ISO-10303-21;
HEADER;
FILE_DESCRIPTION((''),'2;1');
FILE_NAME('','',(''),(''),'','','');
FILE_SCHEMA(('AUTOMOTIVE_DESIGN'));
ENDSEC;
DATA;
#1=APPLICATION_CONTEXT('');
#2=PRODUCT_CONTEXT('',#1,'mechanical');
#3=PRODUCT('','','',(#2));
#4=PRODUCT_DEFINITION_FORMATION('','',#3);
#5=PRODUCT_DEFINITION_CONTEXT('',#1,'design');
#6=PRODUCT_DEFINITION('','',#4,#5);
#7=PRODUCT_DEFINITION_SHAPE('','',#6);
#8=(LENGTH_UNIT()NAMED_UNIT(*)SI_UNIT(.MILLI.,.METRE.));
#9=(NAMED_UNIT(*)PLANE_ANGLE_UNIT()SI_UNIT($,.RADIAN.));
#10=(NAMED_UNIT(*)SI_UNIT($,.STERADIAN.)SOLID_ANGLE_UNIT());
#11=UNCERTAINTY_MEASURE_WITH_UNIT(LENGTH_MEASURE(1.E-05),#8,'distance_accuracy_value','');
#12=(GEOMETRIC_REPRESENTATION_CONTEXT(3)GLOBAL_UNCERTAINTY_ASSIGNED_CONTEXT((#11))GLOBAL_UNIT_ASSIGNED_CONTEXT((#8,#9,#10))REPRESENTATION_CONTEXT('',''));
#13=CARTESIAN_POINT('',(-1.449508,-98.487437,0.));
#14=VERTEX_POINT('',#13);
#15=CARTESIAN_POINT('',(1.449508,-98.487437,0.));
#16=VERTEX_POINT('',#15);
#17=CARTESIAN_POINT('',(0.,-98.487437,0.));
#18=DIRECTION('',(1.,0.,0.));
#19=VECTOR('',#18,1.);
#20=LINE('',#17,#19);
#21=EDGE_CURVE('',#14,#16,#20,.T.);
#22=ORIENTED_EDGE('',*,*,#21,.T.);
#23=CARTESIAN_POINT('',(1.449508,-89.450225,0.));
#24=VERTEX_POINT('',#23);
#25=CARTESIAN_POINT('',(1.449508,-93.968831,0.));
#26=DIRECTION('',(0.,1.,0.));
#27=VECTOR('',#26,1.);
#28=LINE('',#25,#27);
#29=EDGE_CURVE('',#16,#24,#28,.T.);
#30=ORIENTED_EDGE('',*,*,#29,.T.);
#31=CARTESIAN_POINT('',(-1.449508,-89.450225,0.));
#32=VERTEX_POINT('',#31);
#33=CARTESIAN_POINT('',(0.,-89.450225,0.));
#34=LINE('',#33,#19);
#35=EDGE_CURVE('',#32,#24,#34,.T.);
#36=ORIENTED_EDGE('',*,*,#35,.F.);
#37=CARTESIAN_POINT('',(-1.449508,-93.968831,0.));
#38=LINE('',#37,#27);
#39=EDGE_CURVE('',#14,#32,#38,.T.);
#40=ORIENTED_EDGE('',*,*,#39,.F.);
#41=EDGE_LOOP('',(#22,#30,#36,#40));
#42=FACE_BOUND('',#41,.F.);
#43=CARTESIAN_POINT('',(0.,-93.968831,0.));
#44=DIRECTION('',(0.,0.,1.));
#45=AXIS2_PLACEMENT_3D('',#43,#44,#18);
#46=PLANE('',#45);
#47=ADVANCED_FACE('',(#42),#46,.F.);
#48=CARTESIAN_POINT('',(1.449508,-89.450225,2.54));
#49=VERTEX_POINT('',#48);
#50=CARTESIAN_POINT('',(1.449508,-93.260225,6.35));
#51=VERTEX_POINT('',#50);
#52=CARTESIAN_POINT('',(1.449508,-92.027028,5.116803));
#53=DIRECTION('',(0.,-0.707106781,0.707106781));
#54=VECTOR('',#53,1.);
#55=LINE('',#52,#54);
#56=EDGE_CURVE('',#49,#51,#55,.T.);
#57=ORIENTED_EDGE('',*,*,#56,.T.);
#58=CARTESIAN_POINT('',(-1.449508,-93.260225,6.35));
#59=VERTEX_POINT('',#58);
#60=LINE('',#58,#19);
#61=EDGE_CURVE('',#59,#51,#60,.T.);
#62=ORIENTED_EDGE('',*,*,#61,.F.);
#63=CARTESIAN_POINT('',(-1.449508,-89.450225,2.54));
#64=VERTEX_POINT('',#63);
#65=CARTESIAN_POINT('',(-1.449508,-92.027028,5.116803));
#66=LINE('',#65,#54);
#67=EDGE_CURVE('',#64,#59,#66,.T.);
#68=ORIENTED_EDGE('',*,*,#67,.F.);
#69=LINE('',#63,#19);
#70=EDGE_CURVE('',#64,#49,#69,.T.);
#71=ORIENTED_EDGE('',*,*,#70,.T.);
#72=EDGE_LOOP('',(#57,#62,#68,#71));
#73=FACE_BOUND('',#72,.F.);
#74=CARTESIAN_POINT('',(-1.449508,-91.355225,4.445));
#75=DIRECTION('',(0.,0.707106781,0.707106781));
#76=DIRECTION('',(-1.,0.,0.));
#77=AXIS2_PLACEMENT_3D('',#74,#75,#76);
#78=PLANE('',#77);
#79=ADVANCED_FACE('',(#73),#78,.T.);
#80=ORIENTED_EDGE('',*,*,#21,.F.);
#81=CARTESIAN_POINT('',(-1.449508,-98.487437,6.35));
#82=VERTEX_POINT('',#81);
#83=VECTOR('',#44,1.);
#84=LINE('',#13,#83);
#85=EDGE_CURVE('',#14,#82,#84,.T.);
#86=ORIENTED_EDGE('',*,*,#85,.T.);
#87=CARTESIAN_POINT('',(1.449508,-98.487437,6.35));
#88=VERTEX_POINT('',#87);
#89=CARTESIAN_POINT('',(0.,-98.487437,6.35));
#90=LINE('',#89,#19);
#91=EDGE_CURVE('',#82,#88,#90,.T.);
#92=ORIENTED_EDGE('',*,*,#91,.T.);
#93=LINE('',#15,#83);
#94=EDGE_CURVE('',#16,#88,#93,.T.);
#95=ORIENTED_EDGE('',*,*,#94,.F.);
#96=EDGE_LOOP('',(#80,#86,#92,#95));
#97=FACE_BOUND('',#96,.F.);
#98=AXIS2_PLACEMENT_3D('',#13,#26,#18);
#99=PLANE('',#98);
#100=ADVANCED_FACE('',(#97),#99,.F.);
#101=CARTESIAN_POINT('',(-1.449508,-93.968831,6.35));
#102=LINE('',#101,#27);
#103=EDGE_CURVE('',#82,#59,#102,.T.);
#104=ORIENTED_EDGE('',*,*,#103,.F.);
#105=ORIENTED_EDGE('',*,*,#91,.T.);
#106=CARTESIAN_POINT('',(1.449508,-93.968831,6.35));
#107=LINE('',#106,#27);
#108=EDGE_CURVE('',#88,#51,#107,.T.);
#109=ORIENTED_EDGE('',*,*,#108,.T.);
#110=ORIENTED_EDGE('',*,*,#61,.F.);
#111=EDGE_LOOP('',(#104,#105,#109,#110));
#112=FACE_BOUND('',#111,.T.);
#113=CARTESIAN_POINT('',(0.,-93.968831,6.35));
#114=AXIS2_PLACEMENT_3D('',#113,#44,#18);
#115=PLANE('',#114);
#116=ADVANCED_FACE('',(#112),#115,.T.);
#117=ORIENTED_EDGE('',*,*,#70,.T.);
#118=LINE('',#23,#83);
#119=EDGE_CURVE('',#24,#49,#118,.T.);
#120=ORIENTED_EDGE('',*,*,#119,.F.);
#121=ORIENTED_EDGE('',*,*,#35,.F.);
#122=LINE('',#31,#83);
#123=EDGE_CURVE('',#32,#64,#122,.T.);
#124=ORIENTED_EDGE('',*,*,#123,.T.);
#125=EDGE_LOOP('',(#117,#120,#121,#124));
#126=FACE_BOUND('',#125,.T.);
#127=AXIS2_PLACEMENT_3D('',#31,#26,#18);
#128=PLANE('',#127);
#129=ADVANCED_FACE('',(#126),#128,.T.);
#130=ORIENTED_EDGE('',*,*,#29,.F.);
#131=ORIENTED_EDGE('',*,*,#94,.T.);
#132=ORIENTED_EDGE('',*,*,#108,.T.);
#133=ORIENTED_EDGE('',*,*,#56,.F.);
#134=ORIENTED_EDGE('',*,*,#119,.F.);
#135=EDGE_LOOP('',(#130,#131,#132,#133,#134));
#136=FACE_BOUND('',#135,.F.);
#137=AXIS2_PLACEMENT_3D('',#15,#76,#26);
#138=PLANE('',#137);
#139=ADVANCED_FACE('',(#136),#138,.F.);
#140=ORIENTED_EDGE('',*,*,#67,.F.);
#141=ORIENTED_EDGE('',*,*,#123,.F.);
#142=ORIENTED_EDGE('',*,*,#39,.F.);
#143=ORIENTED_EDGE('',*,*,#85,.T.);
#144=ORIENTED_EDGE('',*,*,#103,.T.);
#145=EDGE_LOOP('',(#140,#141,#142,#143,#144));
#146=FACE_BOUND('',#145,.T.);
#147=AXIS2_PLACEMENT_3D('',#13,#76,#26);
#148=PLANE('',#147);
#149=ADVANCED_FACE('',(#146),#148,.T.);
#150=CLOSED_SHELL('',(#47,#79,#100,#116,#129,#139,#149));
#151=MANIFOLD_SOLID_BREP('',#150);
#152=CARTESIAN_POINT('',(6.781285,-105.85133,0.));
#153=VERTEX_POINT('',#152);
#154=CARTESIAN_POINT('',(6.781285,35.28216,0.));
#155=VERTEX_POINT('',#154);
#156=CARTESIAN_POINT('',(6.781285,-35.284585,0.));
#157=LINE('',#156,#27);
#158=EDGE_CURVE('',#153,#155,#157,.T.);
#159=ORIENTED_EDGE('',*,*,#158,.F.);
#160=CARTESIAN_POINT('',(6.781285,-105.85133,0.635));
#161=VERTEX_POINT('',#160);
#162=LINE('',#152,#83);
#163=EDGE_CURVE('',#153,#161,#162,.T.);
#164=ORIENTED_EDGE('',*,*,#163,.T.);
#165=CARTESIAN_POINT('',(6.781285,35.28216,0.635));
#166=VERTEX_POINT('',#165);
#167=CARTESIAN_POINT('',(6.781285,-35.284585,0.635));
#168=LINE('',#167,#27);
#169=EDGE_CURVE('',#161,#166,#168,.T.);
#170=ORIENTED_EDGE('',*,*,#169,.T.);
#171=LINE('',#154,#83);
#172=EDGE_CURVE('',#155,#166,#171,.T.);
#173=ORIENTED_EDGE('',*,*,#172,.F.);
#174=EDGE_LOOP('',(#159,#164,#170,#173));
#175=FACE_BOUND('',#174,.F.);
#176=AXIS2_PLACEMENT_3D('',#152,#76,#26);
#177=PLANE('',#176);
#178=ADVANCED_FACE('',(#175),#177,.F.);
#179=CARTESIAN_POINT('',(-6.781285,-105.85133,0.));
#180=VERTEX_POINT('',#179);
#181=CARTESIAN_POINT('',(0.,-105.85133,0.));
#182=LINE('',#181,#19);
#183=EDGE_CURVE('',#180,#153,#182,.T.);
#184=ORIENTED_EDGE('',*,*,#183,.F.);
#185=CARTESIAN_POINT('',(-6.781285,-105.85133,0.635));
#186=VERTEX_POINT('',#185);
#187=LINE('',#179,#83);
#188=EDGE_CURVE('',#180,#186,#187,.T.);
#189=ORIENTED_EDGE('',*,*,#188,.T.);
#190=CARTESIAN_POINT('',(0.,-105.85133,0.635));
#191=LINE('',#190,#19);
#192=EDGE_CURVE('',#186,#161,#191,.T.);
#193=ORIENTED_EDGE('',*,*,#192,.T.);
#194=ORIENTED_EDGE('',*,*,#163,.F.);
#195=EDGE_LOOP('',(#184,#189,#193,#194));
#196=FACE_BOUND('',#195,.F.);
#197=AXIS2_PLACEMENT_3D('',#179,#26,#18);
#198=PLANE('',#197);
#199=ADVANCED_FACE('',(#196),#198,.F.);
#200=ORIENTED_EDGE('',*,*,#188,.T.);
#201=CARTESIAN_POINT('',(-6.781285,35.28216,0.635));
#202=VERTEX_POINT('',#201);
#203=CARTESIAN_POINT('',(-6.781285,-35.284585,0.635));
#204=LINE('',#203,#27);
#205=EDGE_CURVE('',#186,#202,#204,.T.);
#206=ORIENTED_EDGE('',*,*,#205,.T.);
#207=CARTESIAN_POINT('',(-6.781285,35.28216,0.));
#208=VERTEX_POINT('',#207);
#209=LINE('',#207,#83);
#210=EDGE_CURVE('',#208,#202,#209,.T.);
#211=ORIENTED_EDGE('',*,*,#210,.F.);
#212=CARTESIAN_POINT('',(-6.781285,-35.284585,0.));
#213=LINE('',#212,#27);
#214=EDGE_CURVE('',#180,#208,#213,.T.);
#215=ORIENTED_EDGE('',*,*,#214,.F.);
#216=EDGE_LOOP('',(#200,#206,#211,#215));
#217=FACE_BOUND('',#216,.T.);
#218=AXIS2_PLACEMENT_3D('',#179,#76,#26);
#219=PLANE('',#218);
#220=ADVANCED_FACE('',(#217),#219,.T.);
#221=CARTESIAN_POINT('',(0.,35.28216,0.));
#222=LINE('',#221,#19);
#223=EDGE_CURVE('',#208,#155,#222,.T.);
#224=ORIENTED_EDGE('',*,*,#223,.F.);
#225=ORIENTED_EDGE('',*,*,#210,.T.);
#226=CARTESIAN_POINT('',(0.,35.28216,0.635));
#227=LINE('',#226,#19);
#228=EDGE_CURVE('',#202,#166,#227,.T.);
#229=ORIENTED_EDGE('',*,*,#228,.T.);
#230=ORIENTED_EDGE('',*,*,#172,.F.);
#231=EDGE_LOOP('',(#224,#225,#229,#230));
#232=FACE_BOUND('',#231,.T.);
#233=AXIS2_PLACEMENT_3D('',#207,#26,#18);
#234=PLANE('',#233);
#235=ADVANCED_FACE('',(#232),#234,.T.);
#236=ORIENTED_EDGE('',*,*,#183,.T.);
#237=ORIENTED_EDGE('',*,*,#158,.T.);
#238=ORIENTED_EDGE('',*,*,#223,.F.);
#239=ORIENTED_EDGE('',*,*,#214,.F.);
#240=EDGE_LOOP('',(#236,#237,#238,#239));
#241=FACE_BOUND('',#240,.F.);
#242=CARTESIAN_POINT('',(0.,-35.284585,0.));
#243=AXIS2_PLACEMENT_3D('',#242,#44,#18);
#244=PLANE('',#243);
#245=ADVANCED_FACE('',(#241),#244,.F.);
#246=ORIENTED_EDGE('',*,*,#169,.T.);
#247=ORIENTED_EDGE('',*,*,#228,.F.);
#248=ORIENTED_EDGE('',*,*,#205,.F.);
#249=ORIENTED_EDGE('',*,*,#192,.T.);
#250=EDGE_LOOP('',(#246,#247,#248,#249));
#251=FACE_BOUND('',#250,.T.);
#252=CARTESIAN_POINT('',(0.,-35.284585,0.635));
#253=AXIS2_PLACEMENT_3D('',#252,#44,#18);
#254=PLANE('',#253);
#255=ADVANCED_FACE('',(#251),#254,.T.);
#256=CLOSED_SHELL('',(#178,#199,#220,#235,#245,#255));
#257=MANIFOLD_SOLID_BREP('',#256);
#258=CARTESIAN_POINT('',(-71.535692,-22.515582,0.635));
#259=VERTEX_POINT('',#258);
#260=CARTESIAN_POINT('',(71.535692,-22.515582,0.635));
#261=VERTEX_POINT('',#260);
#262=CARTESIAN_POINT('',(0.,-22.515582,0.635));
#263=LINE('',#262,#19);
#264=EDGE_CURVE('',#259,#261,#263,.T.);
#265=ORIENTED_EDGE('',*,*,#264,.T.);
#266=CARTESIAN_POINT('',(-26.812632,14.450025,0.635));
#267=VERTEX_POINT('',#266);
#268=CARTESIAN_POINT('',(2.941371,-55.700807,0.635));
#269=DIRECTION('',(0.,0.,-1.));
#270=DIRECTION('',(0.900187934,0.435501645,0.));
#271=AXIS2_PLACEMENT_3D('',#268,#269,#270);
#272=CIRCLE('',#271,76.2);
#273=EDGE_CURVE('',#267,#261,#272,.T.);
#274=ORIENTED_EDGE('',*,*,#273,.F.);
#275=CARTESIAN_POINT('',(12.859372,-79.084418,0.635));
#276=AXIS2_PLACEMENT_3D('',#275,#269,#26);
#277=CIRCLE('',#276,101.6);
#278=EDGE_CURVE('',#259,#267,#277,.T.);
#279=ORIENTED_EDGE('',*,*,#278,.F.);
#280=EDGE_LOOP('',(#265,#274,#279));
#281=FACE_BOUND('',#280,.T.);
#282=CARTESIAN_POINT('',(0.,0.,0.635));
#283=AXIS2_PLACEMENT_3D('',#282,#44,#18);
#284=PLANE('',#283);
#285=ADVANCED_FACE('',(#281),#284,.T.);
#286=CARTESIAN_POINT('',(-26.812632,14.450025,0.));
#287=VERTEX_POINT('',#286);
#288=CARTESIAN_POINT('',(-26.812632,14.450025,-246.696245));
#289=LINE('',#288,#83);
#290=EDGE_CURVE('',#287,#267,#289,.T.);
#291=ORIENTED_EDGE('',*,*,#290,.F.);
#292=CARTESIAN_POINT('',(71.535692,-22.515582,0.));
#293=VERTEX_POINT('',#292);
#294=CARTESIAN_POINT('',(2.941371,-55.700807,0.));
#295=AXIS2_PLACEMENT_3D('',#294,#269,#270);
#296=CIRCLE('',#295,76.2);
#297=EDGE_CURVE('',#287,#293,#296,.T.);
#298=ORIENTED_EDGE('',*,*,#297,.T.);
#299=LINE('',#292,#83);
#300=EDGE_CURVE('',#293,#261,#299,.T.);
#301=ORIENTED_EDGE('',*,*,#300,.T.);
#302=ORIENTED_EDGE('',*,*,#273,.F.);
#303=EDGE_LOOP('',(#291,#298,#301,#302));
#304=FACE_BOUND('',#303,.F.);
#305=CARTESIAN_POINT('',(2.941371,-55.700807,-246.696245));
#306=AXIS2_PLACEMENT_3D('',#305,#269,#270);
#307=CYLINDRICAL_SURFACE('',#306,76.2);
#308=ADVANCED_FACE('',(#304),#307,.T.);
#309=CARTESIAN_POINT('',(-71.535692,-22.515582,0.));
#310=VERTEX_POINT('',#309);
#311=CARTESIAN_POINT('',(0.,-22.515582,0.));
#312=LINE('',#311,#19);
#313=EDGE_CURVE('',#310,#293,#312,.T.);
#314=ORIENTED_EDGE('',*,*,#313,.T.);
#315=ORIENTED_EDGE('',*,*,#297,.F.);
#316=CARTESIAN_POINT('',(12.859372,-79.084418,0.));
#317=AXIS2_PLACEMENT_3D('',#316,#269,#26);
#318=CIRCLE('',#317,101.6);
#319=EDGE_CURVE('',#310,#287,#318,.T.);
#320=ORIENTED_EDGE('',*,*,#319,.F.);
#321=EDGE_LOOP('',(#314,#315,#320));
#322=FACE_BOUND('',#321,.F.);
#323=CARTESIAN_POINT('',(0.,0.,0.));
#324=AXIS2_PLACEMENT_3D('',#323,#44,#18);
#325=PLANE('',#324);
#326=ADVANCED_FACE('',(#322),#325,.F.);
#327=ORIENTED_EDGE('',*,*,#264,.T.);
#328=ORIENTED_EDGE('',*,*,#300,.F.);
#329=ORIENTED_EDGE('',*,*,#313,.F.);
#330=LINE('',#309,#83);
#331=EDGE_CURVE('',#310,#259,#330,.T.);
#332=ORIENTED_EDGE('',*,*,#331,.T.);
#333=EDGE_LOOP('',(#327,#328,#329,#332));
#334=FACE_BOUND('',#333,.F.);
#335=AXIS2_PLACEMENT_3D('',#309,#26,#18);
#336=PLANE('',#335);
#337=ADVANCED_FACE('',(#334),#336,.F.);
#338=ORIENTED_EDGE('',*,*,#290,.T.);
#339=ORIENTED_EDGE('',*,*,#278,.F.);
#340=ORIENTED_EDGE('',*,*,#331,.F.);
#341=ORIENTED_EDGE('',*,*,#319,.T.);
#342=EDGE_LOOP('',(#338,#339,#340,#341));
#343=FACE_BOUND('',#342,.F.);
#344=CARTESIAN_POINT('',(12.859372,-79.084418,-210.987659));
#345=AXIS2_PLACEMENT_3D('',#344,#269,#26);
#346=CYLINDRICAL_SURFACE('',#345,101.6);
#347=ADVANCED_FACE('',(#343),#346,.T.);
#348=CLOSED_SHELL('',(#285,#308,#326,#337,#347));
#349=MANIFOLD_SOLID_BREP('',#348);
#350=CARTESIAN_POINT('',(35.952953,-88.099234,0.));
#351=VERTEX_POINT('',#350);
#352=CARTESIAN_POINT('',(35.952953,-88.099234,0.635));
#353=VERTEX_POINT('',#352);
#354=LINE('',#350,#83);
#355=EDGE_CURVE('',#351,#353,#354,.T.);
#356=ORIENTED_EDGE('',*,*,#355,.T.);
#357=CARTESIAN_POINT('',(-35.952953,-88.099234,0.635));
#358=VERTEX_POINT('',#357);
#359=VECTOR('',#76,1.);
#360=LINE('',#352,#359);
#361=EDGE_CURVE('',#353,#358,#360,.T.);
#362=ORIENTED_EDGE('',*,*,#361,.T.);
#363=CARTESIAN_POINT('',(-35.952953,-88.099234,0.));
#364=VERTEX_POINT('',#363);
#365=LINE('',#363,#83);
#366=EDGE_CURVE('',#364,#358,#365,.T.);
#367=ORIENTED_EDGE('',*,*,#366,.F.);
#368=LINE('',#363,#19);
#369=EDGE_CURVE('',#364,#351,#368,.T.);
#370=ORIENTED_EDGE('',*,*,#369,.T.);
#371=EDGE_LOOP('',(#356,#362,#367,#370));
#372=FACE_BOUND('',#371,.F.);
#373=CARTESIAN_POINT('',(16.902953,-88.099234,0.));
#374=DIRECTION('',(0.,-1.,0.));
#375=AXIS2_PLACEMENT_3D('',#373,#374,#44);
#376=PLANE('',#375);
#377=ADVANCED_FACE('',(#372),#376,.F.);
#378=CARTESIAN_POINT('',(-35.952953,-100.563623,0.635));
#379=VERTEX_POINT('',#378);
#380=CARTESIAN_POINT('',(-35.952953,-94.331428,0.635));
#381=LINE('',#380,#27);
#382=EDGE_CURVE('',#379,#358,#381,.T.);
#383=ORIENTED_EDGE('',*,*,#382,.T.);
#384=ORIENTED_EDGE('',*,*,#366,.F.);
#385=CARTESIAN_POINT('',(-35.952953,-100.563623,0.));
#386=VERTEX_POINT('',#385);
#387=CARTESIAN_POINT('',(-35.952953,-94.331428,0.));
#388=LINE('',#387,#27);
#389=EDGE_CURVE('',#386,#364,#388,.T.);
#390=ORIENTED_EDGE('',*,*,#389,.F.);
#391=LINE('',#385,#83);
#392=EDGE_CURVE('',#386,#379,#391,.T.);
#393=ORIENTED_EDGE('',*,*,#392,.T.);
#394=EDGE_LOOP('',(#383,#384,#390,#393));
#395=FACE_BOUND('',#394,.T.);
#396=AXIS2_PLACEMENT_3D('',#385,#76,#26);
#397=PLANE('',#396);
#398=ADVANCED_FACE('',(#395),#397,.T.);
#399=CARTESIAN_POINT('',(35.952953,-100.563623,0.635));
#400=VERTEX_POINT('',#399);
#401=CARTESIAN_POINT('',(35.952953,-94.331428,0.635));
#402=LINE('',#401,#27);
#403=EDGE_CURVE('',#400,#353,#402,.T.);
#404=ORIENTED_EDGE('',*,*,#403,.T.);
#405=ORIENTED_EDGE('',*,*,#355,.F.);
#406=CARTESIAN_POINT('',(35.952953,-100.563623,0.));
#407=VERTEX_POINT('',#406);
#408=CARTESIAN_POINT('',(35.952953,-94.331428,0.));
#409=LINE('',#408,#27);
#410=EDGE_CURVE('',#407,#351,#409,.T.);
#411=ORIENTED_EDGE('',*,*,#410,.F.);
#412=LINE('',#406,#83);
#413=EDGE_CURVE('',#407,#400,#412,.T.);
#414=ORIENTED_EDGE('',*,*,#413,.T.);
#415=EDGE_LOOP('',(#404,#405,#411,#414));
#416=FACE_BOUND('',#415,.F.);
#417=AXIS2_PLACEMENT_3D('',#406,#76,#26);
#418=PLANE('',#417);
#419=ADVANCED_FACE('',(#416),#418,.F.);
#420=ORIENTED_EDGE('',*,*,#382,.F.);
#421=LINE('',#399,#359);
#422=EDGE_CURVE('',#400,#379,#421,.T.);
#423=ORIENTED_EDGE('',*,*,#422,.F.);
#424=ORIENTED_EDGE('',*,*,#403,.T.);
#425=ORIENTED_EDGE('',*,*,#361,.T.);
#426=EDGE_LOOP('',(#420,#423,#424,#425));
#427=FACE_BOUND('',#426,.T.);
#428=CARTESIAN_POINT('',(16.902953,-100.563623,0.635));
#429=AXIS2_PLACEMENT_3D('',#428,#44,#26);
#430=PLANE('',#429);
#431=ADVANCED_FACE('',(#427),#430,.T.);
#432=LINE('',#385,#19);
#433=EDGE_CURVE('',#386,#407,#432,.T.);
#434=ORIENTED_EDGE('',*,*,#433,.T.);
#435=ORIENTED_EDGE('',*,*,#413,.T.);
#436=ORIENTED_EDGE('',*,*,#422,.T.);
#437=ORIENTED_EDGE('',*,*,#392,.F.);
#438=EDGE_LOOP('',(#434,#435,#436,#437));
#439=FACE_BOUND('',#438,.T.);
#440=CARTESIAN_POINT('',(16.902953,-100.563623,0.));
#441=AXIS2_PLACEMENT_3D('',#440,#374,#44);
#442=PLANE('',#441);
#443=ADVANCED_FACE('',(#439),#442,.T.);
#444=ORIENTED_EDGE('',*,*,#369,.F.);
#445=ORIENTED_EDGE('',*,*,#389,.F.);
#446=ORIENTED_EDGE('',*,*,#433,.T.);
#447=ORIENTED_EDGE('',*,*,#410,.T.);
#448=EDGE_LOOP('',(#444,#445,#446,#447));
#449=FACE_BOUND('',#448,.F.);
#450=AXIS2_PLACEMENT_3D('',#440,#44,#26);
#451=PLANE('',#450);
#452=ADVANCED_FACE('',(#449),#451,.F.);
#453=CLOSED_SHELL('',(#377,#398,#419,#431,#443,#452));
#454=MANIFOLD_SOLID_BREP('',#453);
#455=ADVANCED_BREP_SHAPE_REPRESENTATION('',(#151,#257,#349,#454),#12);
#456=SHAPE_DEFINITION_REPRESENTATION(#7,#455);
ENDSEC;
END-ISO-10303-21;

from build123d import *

# Parameters (mm, degrees)
F0_W        = 143.0713832378
F0_H        = 45.0311638415
F4_DEPTH    = 0.635
F3_W        = 2.8990160208
F3_H        = 9.0372115374
F5_DEPTH    = 6.35
F1_W        = 13.562570326
F1_H        = 141.1334902227
F6_DEPTH    = 0.635
F2_W        = 33.8059067726
F2_H        = 12.464389205
F7_T1_DEPTH = 422.6103184628
F8_T1_DEPTH = 494.0274907259
F9_SIZE     = 3.81
F10_DEPTH   = 19.05
F11_DEPTH   = 19.05


# Not quite as in the source:
# - a fillet or chamfer that OpenCascade refuses, or shapes differently, is made with other operations: its cross-section is extruded or revolved along the edge and cut away or added


with BuildPart() as f4:
    # F0 (on Top) → F4 (new body)
    with BuildSketch(Plane.XY):
        Rectangle(F0_W, F0_H)
    extrude(amount=F4_DEPTH)

    # F7: fillet of radius 101.6 on 1 edges, made by hand

    # F7_s2 → F7_t1 (cut)
    with BuildSketch(Plane.XY.offset(-210.9876592314)):
        with BuildLine():
            ThreePointArc((12.8593720736, 22.5155819207), (-34.969313076, 10.5536144563), (-71.5356916189, -22.5155819207))
            Line((-71.5356916189, -22.5155819207), (-71.5356916189, 22.5155819207))
            Line((-71.5356916189, 22.5155819207), (12.8593720736, 22.5155819207))
        make_face()
    extrude(amount=F7_T1_DEPTH, mode=Mode.SUBTRACT)

    # F8: fillet of radius 76.2 on 1 edges, made by hand

    # F8_s2 → F8_t1 (cut)
    with BuildSketch(Plane.XY.offset(-246.696245363)):
        with BuildLine():
            ThreePointArc((71.5356916189, -22.5155819207), (29.7510071905, 15.6271915076), (-26.8126321644, 14.4500252009))
            Line((-26.8126321644, 14.4500252009), (-29.7880324822, 21.4651084469))
            ThreePointArc((-29.7880324822, 21.4651084469), (12.8593720736, 30.1355819207), (71.5356916189, 30.1355819207))
            Line((71.5356916189, 30.1355819207), (79.1556916189, 22.5155819207))
            ThreePointArc((79.1556916189, 22.5155819207), (79.1556916189, 0), (78.3951236794, -19.1970593869))
            Line((78.3951236794, -19.1970593869), (71.5356916189, -22.5155819207))
        make_face()
    extrude(amount=F8_T1_DEPTH, mode=Mode.SUBTRACT)


with BuildPart() as f5:
    # F3 (on Top) → F5 (new body)
    with BuildSketch(Plane.XY):
        with Locations((0, -93.9688310027)):
            Rectangle(F3_W, F3_H)
    extrude(amount=F5_DEPTH)

    # F9
    f9_edges = [f5.edges().sort_by_distance(p)[0] for p in [
        (0, -89.450225, 6.35),
    ]]
    chamfer(f9_edges, length=F9_SIZE)


with BuildPart() as f6:
    # F1 (on Top) → F6 (new body)
    with BuildSketch(Plane.XY):
        with Locations((0, -35.2845847517)):
            Rectangle(F1_W, F1_H)
    extrude(amount=F6_DEPTH)


with BuildPart() as f6b:
    # F2 (on Top) → F6, piece 2 (new body)
    with BuildSketch(Plane.XY):
        with Locations((0, -94.3314284086)):
            Rectangle(F2_W, F2_H)
    extrude(amount=F6_DEPTH)

    # F10 (add): a face of the model
    f10_faces = [f6b.faces().sort_by_distance(p)[0] for p in [
        (-16.9029533863, -94.3314284086, 0.3175),
    ]]
    extrude(f10_faces, amount=F10_DEPTH)

    # F11 (add): a face of the model
    f11_faces = [f6b.faces().sort_by_distance(p)[0] for p in [
        (16.9029533863, -94.3314284086, 0.3175),
    ]]
    extrude(f11_faces, amount=F11_DEPTH)


solid = Compound([f4.part, f5.part, f6.part, f6b.part])
